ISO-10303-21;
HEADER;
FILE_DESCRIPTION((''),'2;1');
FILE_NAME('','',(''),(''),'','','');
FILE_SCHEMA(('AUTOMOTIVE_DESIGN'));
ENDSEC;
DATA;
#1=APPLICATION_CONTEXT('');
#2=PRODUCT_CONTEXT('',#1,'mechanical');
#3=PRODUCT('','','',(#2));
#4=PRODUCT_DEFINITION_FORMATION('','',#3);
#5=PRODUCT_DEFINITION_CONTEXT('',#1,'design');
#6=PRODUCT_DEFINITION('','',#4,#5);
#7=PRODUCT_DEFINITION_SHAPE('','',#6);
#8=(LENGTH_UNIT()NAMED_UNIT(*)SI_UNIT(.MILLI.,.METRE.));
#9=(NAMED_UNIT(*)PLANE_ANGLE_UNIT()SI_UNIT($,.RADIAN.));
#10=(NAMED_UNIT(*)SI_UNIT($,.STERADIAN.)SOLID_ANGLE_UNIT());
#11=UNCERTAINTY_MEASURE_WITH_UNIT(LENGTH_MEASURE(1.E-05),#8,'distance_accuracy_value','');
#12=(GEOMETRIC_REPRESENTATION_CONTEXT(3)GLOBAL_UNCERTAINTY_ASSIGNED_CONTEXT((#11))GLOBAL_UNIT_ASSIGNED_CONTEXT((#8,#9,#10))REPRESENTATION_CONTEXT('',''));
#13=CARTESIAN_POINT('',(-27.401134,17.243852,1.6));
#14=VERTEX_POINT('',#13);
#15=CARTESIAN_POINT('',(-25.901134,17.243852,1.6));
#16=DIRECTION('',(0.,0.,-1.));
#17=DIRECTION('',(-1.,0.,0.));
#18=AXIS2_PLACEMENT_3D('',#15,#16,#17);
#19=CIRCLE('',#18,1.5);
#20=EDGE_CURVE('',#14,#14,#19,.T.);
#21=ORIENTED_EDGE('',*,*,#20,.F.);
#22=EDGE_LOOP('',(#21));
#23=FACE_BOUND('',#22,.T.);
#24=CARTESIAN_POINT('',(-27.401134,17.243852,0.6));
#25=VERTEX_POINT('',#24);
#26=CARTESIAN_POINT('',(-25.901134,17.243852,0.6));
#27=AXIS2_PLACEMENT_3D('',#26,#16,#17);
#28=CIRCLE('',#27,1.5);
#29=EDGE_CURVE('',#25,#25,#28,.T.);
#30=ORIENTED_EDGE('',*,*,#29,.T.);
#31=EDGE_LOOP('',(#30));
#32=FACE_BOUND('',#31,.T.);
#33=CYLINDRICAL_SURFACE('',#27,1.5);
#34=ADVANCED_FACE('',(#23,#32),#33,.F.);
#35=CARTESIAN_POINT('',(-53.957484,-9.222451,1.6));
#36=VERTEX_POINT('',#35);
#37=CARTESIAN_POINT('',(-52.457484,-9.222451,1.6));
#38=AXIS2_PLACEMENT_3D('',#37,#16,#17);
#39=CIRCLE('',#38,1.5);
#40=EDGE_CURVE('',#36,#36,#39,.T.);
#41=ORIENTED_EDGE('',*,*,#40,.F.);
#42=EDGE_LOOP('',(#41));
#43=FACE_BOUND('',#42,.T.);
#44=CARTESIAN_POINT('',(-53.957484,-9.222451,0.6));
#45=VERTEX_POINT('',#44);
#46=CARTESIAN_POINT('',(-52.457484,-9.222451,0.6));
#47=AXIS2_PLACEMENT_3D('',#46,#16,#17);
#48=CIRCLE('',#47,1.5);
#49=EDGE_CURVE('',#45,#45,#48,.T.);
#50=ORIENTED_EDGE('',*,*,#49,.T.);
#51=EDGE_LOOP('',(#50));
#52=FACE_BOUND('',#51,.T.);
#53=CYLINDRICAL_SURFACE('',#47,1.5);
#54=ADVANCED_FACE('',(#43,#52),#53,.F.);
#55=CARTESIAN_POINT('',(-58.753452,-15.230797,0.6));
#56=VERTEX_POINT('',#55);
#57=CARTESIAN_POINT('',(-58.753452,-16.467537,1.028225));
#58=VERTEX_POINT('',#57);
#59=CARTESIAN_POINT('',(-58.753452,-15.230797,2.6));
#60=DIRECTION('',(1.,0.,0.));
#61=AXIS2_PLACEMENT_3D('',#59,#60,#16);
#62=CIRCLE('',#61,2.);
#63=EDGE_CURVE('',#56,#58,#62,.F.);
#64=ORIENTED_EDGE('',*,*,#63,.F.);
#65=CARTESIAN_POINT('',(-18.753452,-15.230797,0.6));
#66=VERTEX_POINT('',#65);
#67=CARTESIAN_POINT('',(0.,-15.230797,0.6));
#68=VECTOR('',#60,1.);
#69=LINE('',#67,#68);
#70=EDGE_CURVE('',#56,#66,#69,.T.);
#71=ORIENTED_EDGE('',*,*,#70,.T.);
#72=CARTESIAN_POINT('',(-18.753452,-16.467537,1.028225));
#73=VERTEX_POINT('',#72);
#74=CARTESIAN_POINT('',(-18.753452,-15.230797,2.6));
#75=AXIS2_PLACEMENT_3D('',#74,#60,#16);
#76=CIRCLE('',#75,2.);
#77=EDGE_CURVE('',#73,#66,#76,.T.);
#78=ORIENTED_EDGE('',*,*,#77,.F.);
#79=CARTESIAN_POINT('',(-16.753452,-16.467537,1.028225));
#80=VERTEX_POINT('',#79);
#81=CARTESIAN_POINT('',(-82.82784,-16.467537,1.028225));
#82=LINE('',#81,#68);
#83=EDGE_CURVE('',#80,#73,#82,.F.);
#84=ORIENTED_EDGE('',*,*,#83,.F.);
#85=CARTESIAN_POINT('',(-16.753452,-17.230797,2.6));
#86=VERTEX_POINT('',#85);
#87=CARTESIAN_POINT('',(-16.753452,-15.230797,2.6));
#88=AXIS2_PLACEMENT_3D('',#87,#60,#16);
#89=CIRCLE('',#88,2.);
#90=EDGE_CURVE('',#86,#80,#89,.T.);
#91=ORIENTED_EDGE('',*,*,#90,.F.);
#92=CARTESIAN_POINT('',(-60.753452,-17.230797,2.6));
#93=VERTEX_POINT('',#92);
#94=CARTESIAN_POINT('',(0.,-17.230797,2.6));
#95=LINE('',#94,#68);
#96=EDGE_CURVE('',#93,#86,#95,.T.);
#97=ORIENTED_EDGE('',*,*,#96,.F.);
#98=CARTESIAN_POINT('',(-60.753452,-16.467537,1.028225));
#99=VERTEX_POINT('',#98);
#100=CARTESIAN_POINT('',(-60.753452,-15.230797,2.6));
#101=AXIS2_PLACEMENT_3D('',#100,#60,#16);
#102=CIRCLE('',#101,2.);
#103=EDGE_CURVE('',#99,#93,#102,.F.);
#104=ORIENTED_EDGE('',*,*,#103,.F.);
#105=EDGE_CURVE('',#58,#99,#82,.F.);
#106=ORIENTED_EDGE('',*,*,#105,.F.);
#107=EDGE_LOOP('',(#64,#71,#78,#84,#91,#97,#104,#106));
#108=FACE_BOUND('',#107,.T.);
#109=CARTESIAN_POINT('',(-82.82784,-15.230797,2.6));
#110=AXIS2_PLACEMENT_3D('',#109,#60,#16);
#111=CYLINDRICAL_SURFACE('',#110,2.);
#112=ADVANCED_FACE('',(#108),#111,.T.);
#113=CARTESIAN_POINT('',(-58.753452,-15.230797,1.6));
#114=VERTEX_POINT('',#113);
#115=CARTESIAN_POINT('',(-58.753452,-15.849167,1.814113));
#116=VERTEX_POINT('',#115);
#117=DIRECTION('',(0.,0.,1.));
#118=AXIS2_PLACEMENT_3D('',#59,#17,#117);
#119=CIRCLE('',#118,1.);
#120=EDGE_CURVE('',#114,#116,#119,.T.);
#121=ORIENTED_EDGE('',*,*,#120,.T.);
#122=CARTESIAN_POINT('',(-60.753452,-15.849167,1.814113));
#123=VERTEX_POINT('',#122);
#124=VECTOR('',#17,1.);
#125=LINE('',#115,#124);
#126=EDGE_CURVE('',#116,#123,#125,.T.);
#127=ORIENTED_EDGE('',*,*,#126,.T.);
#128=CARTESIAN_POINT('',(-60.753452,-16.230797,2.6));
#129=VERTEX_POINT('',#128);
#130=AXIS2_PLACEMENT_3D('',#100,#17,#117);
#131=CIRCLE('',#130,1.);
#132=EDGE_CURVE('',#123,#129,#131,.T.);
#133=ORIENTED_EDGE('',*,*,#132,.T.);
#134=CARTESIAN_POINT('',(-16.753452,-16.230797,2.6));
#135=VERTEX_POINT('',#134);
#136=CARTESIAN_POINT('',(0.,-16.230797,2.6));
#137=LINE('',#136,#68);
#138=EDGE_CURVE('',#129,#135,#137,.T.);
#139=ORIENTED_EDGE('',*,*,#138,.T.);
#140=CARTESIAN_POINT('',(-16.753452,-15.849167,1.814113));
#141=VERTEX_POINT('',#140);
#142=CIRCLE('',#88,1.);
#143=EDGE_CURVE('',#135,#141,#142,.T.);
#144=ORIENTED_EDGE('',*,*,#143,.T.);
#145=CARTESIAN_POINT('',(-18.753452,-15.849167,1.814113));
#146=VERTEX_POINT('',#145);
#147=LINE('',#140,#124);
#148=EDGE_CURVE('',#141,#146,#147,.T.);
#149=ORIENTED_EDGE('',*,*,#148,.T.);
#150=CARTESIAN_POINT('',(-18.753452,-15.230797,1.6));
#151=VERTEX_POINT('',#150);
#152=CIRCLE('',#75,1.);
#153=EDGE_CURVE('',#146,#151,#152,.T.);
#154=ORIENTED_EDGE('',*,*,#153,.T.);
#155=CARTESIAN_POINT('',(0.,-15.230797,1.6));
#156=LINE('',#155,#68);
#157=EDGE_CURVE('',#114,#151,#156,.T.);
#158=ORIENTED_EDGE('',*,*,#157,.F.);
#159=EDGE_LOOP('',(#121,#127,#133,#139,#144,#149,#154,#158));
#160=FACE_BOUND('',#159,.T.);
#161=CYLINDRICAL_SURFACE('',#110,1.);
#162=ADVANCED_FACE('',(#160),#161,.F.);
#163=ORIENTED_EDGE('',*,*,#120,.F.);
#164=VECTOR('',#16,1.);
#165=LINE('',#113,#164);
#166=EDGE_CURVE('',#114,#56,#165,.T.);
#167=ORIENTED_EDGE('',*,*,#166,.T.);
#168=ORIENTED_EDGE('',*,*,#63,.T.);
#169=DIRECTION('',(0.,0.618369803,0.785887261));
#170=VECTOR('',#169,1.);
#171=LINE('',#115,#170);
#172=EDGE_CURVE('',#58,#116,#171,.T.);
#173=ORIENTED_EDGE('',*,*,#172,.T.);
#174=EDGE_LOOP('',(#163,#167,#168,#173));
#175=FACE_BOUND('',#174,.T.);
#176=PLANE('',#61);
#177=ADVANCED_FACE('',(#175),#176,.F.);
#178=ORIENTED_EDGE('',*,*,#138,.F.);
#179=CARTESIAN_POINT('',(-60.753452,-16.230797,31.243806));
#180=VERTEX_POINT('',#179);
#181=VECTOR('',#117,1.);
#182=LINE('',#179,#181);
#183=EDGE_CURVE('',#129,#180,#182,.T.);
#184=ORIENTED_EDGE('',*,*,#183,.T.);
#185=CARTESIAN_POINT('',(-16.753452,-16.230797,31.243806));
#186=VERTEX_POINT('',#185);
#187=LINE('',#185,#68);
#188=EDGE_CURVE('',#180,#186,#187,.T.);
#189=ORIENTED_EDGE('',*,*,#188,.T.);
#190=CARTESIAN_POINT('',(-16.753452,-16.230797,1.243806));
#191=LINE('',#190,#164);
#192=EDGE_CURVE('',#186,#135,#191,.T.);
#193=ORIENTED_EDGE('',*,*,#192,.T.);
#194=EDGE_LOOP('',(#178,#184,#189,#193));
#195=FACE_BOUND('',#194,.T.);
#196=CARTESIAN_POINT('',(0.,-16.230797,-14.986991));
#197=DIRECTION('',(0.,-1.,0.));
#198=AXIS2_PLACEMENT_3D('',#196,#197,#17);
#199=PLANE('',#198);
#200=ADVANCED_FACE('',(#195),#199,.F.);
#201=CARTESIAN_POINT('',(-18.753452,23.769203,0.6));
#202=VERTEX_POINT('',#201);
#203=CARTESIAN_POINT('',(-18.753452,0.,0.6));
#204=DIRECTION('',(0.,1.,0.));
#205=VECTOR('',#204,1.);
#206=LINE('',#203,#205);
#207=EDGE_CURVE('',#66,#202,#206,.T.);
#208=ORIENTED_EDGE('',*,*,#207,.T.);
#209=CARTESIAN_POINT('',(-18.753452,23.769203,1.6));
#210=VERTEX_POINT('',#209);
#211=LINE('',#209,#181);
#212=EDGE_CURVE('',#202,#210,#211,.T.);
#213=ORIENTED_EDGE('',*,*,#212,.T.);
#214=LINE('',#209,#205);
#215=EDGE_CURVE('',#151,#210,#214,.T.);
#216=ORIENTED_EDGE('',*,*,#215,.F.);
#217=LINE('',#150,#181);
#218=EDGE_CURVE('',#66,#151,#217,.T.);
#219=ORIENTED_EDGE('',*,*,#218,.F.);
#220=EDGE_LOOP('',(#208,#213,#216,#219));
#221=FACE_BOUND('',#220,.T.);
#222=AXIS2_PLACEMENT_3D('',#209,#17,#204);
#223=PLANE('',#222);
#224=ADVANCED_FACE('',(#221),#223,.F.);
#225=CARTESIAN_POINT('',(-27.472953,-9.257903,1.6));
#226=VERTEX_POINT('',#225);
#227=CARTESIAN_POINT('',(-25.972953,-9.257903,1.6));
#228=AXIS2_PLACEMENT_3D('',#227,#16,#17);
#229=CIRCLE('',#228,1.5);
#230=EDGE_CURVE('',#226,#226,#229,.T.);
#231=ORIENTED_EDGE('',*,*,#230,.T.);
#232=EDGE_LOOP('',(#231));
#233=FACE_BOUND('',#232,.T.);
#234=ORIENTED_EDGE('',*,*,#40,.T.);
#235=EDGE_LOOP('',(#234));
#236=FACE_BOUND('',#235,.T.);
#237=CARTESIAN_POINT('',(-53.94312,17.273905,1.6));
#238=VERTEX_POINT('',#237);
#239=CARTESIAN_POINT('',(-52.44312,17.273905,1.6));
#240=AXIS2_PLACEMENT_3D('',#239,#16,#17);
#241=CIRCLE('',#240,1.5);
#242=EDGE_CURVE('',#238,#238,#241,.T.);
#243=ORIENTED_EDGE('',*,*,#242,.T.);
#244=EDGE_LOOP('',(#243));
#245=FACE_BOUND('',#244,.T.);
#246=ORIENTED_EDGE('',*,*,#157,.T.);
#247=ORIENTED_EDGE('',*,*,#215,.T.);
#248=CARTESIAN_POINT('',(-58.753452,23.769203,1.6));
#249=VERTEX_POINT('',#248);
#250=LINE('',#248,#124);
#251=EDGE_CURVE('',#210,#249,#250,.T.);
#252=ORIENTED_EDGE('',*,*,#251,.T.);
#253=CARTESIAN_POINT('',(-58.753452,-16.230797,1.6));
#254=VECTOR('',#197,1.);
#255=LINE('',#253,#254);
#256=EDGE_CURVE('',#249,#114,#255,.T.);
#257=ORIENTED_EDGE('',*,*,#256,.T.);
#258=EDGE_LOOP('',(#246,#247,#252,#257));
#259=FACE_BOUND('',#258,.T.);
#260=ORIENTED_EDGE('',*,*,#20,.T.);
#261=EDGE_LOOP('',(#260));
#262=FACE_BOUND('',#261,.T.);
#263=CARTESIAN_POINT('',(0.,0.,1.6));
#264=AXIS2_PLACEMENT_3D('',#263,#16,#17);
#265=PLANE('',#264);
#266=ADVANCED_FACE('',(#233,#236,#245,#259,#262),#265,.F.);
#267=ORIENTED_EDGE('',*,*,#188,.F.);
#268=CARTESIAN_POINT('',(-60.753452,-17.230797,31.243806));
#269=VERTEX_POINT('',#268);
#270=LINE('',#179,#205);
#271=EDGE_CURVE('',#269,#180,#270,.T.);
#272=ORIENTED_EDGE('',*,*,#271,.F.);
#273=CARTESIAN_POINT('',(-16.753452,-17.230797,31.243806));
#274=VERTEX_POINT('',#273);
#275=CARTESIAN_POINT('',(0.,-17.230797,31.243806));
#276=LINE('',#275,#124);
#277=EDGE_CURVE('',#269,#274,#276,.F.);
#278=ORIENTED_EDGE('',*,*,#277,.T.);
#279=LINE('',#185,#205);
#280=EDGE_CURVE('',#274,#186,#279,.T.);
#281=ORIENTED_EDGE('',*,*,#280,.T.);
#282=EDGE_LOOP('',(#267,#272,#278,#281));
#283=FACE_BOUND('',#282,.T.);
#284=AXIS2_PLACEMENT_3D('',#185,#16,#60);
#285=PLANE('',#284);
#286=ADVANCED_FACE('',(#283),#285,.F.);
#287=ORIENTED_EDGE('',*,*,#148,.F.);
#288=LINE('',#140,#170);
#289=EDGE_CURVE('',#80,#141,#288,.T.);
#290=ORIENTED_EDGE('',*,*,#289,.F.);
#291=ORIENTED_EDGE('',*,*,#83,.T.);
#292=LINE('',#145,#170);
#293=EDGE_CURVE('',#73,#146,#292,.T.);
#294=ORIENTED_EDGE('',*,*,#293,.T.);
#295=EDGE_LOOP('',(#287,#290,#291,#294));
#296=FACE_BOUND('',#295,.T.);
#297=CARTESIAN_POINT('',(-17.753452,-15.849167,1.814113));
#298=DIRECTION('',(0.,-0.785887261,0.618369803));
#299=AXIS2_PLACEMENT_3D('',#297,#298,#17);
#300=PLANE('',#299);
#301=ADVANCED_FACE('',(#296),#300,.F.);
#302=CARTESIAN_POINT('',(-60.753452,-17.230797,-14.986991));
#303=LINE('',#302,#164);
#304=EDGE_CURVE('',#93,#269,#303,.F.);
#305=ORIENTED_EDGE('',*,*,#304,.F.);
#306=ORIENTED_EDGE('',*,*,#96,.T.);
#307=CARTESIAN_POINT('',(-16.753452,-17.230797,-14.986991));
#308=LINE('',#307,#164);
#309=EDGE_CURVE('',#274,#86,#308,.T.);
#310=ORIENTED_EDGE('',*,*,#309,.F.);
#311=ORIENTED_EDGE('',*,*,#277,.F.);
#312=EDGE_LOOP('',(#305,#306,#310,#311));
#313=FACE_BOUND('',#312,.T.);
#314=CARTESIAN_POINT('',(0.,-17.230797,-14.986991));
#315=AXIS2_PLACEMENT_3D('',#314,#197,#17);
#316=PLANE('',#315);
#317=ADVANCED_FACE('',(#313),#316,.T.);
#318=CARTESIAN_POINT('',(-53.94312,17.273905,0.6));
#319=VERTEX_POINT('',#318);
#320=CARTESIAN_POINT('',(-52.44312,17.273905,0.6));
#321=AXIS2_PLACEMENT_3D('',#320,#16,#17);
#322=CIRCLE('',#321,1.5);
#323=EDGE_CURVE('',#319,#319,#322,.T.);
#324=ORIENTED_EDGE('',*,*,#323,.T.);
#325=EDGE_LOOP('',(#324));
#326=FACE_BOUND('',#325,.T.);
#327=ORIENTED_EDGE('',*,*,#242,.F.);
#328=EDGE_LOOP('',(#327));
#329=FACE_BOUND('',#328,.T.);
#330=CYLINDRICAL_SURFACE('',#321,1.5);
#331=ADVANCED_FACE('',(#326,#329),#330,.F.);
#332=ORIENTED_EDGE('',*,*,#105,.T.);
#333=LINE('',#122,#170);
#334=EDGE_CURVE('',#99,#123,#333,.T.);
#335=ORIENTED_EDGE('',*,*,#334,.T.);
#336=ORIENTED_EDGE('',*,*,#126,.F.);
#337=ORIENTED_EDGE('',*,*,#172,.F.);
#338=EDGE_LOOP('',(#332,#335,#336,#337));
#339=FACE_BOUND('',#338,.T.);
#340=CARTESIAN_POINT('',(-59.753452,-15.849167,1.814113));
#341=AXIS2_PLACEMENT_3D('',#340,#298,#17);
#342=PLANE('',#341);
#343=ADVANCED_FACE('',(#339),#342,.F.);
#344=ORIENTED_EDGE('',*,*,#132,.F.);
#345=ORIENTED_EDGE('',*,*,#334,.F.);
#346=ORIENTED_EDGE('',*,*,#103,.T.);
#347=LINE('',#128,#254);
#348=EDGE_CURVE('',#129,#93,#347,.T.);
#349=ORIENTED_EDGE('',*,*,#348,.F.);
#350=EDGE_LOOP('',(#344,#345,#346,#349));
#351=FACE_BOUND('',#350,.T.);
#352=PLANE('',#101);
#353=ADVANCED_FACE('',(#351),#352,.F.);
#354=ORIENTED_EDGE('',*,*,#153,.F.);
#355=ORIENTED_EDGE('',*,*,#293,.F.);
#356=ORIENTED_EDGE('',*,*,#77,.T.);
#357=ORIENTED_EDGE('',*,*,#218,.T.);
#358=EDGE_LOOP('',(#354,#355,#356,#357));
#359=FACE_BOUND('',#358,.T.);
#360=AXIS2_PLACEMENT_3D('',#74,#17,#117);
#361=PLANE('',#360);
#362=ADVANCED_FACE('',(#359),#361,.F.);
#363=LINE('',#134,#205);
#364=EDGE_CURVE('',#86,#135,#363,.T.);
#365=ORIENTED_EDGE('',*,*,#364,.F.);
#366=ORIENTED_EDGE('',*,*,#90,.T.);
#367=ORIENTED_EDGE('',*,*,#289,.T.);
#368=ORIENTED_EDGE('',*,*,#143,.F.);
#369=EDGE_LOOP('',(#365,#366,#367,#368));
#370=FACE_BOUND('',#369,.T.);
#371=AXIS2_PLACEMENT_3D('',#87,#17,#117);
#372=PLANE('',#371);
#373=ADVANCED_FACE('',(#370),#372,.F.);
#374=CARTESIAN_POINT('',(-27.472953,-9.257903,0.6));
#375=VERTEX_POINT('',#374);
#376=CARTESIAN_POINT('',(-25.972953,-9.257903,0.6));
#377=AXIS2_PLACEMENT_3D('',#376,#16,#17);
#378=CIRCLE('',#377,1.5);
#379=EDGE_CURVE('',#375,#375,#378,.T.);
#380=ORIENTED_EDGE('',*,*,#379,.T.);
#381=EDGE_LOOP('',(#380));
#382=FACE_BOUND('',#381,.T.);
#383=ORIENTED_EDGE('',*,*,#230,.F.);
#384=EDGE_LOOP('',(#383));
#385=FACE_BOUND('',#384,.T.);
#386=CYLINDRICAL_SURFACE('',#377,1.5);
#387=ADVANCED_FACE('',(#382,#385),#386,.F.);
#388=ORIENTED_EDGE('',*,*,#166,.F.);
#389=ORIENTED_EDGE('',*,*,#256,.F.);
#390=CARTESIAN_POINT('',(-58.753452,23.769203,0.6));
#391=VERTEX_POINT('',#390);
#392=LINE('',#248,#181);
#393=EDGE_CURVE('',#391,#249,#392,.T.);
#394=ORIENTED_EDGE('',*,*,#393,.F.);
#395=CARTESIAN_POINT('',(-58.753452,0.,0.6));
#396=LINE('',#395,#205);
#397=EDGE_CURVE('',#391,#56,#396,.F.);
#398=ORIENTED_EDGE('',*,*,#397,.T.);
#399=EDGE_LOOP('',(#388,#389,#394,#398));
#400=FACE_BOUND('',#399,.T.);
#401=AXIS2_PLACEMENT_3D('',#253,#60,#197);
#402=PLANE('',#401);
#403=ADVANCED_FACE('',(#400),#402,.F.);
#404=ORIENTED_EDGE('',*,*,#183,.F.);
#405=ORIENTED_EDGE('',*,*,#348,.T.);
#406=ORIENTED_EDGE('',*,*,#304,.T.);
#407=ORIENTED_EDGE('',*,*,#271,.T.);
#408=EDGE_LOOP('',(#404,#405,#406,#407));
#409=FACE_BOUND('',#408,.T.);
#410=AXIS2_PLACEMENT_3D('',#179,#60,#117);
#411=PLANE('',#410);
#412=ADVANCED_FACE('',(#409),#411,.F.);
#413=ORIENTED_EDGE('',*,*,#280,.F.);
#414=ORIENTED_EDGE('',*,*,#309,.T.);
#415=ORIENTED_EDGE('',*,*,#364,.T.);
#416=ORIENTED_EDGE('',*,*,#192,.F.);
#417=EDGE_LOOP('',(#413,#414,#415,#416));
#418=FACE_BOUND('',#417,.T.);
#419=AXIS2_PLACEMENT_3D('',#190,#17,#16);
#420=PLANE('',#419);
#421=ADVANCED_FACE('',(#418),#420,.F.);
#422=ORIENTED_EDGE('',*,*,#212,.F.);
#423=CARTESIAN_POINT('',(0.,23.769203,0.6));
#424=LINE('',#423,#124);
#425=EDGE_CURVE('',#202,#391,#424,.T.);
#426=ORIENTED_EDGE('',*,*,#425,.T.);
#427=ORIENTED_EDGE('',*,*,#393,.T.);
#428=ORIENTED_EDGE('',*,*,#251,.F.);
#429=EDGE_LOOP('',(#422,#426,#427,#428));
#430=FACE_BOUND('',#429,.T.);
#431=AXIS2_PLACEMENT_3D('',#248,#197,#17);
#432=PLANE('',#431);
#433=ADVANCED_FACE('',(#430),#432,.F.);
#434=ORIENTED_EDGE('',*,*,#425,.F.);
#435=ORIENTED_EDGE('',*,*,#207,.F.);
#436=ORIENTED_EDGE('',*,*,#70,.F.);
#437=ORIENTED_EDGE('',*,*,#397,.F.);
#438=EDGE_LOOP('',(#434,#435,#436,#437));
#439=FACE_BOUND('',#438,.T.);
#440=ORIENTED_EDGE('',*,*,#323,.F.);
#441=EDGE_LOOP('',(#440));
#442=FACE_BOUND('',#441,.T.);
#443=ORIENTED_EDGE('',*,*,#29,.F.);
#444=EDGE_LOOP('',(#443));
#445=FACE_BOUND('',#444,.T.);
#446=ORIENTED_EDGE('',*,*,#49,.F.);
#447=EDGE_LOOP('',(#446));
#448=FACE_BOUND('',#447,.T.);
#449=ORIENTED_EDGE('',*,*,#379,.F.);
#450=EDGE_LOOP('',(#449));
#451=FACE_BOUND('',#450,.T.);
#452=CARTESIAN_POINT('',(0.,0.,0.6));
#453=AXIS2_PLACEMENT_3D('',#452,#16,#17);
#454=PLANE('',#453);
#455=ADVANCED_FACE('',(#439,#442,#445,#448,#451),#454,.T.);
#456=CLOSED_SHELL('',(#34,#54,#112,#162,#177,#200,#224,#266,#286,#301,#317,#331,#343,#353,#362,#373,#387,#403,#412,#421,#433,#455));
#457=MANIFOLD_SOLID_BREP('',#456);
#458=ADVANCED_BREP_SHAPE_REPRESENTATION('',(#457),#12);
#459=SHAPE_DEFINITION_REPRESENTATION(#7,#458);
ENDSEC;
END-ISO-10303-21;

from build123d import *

# Parameters (mm, degrees)
BOSS_EXTRUDE4_DEPTH    = 1.6
CONVERT_SOLID6_DEPTH   = 0.6
SKETCHED_START         = -60.753452496
SKETCHED_BEND3_DEPTH   = 44
SKETCHED_BEND3_2_DEPTH = 2
SKETCHED_START_2       = -18.753452496
SKETCHED_BEND3_3_DEPTH = 2
SKETCHED_BEND3_4_DEPTH = 44
SKETCHED_START_3       = -58.753452496
SKETCHED_BEND3_5_DEPTH = 40
F_3_0MM_DOWEL_HOLE1_D  = 3
F_3_0MM_DOWEL_HOLE2_D  = 3
F_3_0MM_DOWEL_HOLE3_D  = 3
F_3_0MM_DOWEL_HOLE4_D  = 3


# Read off the part's stored shape, not the designer's step: Convert-Solid6, Sketched Bend3
with BuildPart() as part:
    # Sketch1 → Boss-Extrude4 (new body)
    with BuildSketch(Plane.XY):
        Polygon((-58.753452496, 23.769203004), (-18.753452496, 23.769203004), (-18.753452496, -16.230796996), (-16.753452496, -16.230796996), (-16.753452496, -46.230796996), (-60.753452496, -46.230796996), (-60.753452496, -16.230796996), (-58.753452496, -16.230796996), align=None)
    extrude(amount=BOSS_EXTRUDE4_DEPTH)

    # Convert-Solid6 outline → Convert-Solid6 (cut)
    with BuildSketch(Plane.XY):
        Polygon((-58.753452496, 23.769203004), (-58.753452496, -16.230796996), (-60.753452496, -16.230796996), (-60.753452496, -46.230796996), (-16.753452496, -46.230796996), (-16.753452496, -16.230796996), (-18.753452496, -16.230796996), (-18.753452496, 23.769203004), align=None)
    extrude(amount=CONVERT_SOLID6_DEPTH, mode=Mode.SUBTRACT)

    # Sketched Bend3 outline → Sketched Bend3 (cut)
    with BuildSketch(Plane.YZ.offset(SKETCHED_START)):
        with BuildLine():
            Line((-16.962847803, 1.6), (-46.230796996, 1.6))
            Line((-46.230796996, 1.6), (-46.230796996, 0.6))
            Line((-46.230796996, 0.6), (-15.230796996, 0.6))
            ThreePointArc((-15.230796996, 0.6), (-16.230796996, 0.867949193), (-16.962847803, 1.6))
        make_face()
    extrude(amount=SKETCHED_BEND3_DEPTH, mode=Mode.SUBTRACT)

    # Sketched Bend3 2 outline → Sketched Bend3 2 (cut)
    with BuildSketch(Plane.YZ.offset(SKETCHED_START)):
        with BuildLine():
            Line((-16.230796996, 1.329098256), (-16.467536602, 1.028225479))
            ThreePointArc((-16.467536602, 1.028225479), (-16.35203432, 0.9438518), (-16.230796996, 0.867949193))
            Line((-16.230796996, 0.867949193), (-16.230796996, 1.329098256))
        make_face()
    extrude(amount=SKETCHED_BEND3_2_DEPTH, mode=Mode.SUBTRACT)

    # Sketched Bend3 3 outline → Sketched Bend3 3 (cut)
    with BuildSketch(Plane.YZ.offset(SKETCHED_START_2)):
        with BuildLine():
            Line((-16.230796996, 1.329098256), (-16.467536602, 1.028225479))
            ThreePointArc((-16.467536602, 1.028225479), (-16.35203432, 0.9438518), (-16.230796996, 0.867949193))
            Line((-16.230796996, 0.867949193), (-16.230796996, 1.329098256))
        make_face()
    extrude(amount=SKETCHED_BEND3_3_DEPTH, mode=Mode.SUBTRACT)

    # Sketched Bend3 4 outline → Sketched Bend3 4 (add)
    with BuildSketch(Plane.YZ.offset(SKETCHED_START)):
        with BuildLine():
            Line((-16.230796996, 31.24380551), (-17.230796996, 31.24380551))
            Line((-17.230796996, 31.24380551), (-17.230796996, 2.6))
            ThreePointArc((-17.230796996, 2.6), (-17.162648648, 2.08236191), (-16.962847803, 1.6))
            Line((-16.962847803, 1.6), (-16.230796996, 1.6))
            Line((-16.230796996, 1.6), (-16.230796996, 1.329098256))
            Line((-16.230796996, 1.329098256), (-15.849166799, 1.814112739))
            ThreePointArc((-15.849166799, 1.814112739), (-16.130344049, 2.163176124), (-16.230796996, 2.6))
            Line((-16.230796996, 2.6), (-16.230796996, 31.24380551))
        make_face()
    extrude(amount=SKETCHED_BEND3_4_DEPTH)

    # Sketched Bend3 5 outline → Sketched Bend3 5 (add)
    with BuildSketch(Plane.YZ.offset(SKETCHED_START_3)):
        with BuildLine():
            ThreePointArc((-15.230796996, 1.6), (-15.557991693, 1.655043054), (-15.849166799, 1.814112739))
            Line((-15.849166799, 1.814112739), (-16.017639885, 1.6))
            Line((-16.017639885, 1.6), (-15.230796996, 1.6))
        make_face()
    extrude(amount=SKETCHED_BEND3_5_DEPTH)

    # Ø3.0mm Dowel Hole1 (through all)
    with Locations(Plane(origin=(-8.856923846, -7.992050606, 0.6), x_dir=(1, 0, 0), z_dir=(0, 0, -1))):
        with Locations((-43.60055999, 1.230399912)):
            Hole(F_3_0MM_DOWEL_HOLE1_D / 2)

    # Ø3.0mm Dowel Hole2 (through all)
    with Locations(Plane(origin=(-8.856923846, -7.992050606, 0.6), x_dir=(1, 0, 0), z_dir=(0, 0, -1))):
        with Locations((-17.11602881, 1.265852801)):
            Hole(F_3_0MM_DOWEL_HOLE2_D / 2)

    # Ø3.0mm Dowel Hole3 (through all)
    with Locations(Plane(origin=(-8.856923846, -7.992050606, 0.6), x_dir=(1, 0, 0), z_dir=(0, 0, -1))):
        with Locations((-43.586196393, -25.265955548)):
            Hole(F_3_0MM_DOWEL_HOLE3_D / 2)

    # Ø3.0mm Dowel Hole4 (through all)
    with Locations(Plane(origin=(-8.856923846, -7.992050606, 0.6), x_dir=(1, 0, 0), z_dir=(0, 0, -1))):
        with Locations((-17.044209907, -25.235902464)):
            Hole(F_3_0MM_DOWEL_HOLE4_D / 2)


solid = part.part
